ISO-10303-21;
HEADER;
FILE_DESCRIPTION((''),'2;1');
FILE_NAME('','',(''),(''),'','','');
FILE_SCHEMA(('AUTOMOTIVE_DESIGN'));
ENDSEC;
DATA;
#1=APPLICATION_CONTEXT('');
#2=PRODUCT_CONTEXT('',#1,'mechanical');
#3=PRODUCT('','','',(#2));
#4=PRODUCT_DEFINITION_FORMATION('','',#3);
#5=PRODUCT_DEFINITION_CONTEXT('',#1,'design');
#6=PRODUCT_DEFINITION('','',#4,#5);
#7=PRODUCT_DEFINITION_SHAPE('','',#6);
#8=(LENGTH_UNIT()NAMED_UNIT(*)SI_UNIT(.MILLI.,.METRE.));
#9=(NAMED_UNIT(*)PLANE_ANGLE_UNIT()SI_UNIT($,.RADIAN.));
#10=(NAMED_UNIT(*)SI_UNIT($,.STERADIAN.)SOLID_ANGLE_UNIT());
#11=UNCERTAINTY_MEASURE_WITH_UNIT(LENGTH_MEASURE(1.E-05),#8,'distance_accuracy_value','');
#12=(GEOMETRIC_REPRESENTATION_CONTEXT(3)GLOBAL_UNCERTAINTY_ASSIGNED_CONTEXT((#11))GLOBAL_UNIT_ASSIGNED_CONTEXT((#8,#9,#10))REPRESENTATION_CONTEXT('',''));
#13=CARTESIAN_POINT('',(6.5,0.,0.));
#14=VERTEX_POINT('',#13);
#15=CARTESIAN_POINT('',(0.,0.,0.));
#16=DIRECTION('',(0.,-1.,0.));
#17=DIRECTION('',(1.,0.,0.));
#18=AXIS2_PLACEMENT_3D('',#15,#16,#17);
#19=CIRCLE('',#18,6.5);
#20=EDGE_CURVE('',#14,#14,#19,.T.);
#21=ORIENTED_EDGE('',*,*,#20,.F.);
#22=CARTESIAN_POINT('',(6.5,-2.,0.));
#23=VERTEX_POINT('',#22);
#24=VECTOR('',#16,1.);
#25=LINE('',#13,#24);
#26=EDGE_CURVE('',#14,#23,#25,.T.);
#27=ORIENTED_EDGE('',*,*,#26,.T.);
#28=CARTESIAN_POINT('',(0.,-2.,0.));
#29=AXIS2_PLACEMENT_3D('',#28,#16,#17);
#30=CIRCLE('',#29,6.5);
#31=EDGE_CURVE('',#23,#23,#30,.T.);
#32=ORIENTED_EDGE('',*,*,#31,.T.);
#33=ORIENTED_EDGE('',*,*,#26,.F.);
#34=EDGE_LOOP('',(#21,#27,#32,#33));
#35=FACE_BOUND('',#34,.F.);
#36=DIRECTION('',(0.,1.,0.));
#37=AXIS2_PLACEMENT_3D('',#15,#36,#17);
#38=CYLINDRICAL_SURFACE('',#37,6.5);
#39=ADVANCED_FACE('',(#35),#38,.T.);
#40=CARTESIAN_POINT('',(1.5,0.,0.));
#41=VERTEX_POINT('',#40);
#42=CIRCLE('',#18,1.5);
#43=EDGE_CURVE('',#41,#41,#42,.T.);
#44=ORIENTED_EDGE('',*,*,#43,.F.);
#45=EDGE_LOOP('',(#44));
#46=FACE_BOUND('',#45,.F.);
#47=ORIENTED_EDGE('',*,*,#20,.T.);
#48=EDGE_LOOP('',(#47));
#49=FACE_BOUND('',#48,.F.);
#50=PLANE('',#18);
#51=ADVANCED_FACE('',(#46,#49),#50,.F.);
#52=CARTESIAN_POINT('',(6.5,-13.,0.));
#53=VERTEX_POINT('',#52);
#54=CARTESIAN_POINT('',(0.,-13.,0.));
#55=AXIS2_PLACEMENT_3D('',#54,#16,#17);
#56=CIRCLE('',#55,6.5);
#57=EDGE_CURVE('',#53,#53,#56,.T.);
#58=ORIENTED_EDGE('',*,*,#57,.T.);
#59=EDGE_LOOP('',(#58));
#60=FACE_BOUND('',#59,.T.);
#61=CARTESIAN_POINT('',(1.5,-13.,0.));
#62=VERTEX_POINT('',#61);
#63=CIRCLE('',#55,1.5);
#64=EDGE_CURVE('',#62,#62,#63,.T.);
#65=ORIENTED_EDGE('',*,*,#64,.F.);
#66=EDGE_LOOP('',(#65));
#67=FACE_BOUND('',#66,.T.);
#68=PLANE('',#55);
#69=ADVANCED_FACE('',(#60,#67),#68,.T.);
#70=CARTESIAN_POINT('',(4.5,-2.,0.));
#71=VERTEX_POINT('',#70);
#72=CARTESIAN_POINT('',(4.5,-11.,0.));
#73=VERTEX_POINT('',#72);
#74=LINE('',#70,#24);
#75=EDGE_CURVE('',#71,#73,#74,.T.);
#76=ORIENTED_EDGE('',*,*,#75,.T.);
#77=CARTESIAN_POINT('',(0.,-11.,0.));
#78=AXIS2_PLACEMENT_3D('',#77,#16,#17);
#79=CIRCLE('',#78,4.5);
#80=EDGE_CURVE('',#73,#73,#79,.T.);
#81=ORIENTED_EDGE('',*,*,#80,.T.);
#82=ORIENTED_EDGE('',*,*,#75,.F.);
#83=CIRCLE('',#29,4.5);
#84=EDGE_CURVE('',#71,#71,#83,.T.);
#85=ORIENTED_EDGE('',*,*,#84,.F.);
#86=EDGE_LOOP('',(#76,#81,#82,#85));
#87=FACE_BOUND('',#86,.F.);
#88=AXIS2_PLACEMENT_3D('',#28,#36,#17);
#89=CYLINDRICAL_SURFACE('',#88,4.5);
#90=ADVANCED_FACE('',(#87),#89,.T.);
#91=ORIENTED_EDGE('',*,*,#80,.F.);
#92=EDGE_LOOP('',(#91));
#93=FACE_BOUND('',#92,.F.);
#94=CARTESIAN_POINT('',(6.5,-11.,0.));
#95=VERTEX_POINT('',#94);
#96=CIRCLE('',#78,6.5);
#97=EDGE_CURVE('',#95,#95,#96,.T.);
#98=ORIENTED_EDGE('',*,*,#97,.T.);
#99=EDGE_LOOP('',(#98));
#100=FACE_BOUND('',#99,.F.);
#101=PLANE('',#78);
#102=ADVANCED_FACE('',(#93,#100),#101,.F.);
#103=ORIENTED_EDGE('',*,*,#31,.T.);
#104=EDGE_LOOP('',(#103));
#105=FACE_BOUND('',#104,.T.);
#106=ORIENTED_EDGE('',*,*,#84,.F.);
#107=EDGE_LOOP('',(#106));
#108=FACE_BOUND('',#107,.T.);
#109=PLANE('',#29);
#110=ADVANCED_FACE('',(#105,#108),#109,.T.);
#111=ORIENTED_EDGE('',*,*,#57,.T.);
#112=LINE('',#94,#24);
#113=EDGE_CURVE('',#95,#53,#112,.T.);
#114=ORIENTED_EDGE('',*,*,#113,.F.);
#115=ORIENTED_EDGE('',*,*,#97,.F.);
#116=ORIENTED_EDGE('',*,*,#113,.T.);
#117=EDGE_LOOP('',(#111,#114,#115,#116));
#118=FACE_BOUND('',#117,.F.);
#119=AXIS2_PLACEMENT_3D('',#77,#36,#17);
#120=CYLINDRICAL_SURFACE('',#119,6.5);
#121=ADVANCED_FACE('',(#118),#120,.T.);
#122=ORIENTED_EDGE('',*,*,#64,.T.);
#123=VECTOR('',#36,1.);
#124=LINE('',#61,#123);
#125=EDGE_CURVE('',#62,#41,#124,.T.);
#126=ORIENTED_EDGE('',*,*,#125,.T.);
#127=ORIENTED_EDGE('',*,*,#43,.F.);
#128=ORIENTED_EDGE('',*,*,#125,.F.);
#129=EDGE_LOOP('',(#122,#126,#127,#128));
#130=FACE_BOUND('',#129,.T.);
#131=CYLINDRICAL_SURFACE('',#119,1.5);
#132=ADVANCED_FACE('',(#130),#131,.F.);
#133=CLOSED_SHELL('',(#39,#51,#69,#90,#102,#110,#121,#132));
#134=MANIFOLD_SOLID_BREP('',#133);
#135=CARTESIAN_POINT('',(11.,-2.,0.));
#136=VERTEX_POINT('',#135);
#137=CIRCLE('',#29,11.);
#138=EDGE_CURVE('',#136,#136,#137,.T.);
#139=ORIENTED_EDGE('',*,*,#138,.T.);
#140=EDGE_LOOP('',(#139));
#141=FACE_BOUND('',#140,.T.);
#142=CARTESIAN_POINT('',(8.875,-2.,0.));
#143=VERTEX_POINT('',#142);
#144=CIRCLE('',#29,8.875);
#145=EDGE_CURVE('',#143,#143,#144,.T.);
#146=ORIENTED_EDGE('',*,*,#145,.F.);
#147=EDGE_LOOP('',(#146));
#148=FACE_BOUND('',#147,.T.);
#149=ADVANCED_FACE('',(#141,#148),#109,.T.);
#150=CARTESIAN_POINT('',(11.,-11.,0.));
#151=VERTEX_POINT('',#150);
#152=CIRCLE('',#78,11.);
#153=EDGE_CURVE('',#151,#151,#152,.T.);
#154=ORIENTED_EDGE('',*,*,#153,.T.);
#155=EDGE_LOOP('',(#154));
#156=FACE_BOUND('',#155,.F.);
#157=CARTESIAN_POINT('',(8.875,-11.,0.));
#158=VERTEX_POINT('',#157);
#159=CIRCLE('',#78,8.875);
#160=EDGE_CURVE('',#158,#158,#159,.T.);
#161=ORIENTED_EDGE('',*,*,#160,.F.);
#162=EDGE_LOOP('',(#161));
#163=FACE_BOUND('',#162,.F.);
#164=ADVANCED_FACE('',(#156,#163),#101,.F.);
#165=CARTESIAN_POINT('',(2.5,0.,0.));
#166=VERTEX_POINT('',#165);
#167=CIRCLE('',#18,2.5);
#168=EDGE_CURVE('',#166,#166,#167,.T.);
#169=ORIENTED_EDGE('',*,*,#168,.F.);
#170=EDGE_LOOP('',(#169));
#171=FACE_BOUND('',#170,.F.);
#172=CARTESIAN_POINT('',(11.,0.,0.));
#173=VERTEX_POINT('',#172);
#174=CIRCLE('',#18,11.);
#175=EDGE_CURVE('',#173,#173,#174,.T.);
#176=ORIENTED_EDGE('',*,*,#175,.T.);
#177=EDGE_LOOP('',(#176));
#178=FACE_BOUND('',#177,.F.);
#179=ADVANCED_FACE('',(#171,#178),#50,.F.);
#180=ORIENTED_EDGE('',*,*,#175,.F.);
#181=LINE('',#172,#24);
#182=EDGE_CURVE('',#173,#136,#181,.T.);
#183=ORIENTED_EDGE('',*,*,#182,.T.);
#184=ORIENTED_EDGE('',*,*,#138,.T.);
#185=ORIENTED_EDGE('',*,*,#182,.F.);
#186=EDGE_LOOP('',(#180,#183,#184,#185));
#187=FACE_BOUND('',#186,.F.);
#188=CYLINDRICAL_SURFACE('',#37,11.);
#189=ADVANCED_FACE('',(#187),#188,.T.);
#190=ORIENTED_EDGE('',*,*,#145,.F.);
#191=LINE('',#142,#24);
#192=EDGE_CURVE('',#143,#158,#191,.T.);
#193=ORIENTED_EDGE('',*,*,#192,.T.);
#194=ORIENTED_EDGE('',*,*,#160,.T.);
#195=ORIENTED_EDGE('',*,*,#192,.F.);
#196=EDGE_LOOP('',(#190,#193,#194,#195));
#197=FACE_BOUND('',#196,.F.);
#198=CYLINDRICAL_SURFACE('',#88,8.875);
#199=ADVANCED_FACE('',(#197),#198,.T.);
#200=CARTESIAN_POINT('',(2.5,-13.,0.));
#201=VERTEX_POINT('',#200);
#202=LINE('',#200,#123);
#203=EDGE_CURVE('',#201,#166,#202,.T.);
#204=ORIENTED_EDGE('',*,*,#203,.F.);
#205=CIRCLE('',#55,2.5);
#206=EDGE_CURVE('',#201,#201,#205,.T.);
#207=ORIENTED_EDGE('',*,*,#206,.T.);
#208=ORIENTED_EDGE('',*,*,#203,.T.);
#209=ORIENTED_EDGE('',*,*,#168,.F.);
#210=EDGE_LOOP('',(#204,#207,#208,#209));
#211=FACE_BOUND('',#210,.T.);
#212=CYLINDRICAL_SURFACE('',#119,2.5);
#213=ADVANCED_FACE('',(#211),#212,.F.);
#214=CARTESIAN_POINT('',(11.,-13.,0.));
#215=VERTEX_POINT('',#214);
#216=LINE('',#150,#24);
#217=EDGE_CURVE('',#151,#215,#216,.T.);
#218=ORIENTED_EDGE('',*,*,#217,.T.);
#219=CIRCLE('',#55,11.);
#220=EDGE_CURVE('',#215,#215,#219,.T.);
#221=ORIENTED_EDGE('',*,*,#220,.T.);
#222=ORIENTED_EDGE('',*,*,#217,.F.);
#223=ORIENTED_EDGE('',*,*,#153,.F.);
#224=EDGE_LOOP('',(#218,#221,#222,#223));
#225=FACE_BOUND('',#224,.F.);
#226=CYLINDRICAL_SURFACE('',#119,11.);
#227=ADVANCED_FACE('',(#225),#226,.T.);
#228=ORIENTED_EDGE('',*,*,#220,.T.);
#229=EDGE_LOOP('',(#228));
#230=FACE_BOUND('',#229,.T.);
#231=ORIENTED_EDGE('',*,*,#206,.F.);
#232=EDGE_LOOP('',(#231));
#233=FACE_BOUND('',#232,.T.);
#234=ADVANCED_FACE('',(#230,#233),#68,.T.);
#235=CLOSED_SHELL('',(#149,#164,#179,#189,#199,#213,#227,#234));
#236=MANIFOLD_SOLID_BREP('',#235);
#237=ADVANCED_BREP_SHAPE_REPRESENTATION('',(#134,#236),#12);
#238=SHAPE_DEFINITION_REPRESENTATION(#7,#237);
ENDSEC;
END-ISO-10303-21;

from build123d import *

# Parameters (mm, degrees)
F0_R      = 11
F0_R_2    = 2.5
F1_DEPTH  = 2
F2_R      = 8.875
F2_R_2    = 2.5
F3_DEPTH  = 9
F4_R      = 11
F4_R_2    = 8.875
F4_R_3    = 2.5
F5_DEPTH  = 2
F6_R      = 6.5
F6_R_2    = 1.5
F7_DEPTH  = 2
F8_R      = 4.5
F8_R_2    = 1.5
F9_DEPTH  = 9
F10_R     = 6.5
F10_R_2   = 4.5
F10_R_3   = 1.5
F11_DEPTH = 2


with BuildPart() as f1:
    # F0 (on Front) → F1 (new body)
    with BuildSketch(Plane.XZ):
        Circle(F0_R)
        Circle(F0_R_2, mode=Mode.SUBTRACT)
    extrude(amount=F1_DEPTH)

    # F2 (on face) → F3 (join)
    with BuildSketch(Plane.XZ.offset(2)):
        Circle(F2_R)
        Circle(F2_R_2, mode=Mode.SUBTRACT)
    extrude(amount=F3_DEPTH)

    # F4 (on face) → F5 (join)
    with BuildSketch(Plane.XZ.offset(11)):
        Circle(F4_R)
        Circle(F4_R_2, mode=Mode.SUBTRACT)
        Circle(F4_R_2)
        Circle(F4_R_3, mode=Mode.SUBTRACT)
    extrude(amount=F5_DEPTH)


with BuildPart() as f7:
    # F6 (on Front) → F7 (new body)
    with BuildSketch(Plane.XZ):
        Circle(F6_R)
        Circle(F6_R_2, mode=Mode.SUBTRACT)
    extrude(amount=F7_DEPTH)

    # F8 (on face) → F9 (join)
    with BuildSketch(Plane.XZ.offset(2)):
        Circle(F8_R)
        Circle(F8_R_2, mode=Mode.SUBTRACT)
    extrude(amount=F9_DEPTH)

    # F10 (on face) → F11 (join)
    with BuildSketch(Plane.XZ.offset(11)):
        Circle(F10_R)
        Circle(F10_R_2, mode=Mode.SUBTRACT)
        Circle(F10_R_2)
        Circle(F10_R_3, mode=Mode.SUBTRACT)
    extrude(amount=F11_DEPTH)


solid = Compound([f1.part, f7.part])
